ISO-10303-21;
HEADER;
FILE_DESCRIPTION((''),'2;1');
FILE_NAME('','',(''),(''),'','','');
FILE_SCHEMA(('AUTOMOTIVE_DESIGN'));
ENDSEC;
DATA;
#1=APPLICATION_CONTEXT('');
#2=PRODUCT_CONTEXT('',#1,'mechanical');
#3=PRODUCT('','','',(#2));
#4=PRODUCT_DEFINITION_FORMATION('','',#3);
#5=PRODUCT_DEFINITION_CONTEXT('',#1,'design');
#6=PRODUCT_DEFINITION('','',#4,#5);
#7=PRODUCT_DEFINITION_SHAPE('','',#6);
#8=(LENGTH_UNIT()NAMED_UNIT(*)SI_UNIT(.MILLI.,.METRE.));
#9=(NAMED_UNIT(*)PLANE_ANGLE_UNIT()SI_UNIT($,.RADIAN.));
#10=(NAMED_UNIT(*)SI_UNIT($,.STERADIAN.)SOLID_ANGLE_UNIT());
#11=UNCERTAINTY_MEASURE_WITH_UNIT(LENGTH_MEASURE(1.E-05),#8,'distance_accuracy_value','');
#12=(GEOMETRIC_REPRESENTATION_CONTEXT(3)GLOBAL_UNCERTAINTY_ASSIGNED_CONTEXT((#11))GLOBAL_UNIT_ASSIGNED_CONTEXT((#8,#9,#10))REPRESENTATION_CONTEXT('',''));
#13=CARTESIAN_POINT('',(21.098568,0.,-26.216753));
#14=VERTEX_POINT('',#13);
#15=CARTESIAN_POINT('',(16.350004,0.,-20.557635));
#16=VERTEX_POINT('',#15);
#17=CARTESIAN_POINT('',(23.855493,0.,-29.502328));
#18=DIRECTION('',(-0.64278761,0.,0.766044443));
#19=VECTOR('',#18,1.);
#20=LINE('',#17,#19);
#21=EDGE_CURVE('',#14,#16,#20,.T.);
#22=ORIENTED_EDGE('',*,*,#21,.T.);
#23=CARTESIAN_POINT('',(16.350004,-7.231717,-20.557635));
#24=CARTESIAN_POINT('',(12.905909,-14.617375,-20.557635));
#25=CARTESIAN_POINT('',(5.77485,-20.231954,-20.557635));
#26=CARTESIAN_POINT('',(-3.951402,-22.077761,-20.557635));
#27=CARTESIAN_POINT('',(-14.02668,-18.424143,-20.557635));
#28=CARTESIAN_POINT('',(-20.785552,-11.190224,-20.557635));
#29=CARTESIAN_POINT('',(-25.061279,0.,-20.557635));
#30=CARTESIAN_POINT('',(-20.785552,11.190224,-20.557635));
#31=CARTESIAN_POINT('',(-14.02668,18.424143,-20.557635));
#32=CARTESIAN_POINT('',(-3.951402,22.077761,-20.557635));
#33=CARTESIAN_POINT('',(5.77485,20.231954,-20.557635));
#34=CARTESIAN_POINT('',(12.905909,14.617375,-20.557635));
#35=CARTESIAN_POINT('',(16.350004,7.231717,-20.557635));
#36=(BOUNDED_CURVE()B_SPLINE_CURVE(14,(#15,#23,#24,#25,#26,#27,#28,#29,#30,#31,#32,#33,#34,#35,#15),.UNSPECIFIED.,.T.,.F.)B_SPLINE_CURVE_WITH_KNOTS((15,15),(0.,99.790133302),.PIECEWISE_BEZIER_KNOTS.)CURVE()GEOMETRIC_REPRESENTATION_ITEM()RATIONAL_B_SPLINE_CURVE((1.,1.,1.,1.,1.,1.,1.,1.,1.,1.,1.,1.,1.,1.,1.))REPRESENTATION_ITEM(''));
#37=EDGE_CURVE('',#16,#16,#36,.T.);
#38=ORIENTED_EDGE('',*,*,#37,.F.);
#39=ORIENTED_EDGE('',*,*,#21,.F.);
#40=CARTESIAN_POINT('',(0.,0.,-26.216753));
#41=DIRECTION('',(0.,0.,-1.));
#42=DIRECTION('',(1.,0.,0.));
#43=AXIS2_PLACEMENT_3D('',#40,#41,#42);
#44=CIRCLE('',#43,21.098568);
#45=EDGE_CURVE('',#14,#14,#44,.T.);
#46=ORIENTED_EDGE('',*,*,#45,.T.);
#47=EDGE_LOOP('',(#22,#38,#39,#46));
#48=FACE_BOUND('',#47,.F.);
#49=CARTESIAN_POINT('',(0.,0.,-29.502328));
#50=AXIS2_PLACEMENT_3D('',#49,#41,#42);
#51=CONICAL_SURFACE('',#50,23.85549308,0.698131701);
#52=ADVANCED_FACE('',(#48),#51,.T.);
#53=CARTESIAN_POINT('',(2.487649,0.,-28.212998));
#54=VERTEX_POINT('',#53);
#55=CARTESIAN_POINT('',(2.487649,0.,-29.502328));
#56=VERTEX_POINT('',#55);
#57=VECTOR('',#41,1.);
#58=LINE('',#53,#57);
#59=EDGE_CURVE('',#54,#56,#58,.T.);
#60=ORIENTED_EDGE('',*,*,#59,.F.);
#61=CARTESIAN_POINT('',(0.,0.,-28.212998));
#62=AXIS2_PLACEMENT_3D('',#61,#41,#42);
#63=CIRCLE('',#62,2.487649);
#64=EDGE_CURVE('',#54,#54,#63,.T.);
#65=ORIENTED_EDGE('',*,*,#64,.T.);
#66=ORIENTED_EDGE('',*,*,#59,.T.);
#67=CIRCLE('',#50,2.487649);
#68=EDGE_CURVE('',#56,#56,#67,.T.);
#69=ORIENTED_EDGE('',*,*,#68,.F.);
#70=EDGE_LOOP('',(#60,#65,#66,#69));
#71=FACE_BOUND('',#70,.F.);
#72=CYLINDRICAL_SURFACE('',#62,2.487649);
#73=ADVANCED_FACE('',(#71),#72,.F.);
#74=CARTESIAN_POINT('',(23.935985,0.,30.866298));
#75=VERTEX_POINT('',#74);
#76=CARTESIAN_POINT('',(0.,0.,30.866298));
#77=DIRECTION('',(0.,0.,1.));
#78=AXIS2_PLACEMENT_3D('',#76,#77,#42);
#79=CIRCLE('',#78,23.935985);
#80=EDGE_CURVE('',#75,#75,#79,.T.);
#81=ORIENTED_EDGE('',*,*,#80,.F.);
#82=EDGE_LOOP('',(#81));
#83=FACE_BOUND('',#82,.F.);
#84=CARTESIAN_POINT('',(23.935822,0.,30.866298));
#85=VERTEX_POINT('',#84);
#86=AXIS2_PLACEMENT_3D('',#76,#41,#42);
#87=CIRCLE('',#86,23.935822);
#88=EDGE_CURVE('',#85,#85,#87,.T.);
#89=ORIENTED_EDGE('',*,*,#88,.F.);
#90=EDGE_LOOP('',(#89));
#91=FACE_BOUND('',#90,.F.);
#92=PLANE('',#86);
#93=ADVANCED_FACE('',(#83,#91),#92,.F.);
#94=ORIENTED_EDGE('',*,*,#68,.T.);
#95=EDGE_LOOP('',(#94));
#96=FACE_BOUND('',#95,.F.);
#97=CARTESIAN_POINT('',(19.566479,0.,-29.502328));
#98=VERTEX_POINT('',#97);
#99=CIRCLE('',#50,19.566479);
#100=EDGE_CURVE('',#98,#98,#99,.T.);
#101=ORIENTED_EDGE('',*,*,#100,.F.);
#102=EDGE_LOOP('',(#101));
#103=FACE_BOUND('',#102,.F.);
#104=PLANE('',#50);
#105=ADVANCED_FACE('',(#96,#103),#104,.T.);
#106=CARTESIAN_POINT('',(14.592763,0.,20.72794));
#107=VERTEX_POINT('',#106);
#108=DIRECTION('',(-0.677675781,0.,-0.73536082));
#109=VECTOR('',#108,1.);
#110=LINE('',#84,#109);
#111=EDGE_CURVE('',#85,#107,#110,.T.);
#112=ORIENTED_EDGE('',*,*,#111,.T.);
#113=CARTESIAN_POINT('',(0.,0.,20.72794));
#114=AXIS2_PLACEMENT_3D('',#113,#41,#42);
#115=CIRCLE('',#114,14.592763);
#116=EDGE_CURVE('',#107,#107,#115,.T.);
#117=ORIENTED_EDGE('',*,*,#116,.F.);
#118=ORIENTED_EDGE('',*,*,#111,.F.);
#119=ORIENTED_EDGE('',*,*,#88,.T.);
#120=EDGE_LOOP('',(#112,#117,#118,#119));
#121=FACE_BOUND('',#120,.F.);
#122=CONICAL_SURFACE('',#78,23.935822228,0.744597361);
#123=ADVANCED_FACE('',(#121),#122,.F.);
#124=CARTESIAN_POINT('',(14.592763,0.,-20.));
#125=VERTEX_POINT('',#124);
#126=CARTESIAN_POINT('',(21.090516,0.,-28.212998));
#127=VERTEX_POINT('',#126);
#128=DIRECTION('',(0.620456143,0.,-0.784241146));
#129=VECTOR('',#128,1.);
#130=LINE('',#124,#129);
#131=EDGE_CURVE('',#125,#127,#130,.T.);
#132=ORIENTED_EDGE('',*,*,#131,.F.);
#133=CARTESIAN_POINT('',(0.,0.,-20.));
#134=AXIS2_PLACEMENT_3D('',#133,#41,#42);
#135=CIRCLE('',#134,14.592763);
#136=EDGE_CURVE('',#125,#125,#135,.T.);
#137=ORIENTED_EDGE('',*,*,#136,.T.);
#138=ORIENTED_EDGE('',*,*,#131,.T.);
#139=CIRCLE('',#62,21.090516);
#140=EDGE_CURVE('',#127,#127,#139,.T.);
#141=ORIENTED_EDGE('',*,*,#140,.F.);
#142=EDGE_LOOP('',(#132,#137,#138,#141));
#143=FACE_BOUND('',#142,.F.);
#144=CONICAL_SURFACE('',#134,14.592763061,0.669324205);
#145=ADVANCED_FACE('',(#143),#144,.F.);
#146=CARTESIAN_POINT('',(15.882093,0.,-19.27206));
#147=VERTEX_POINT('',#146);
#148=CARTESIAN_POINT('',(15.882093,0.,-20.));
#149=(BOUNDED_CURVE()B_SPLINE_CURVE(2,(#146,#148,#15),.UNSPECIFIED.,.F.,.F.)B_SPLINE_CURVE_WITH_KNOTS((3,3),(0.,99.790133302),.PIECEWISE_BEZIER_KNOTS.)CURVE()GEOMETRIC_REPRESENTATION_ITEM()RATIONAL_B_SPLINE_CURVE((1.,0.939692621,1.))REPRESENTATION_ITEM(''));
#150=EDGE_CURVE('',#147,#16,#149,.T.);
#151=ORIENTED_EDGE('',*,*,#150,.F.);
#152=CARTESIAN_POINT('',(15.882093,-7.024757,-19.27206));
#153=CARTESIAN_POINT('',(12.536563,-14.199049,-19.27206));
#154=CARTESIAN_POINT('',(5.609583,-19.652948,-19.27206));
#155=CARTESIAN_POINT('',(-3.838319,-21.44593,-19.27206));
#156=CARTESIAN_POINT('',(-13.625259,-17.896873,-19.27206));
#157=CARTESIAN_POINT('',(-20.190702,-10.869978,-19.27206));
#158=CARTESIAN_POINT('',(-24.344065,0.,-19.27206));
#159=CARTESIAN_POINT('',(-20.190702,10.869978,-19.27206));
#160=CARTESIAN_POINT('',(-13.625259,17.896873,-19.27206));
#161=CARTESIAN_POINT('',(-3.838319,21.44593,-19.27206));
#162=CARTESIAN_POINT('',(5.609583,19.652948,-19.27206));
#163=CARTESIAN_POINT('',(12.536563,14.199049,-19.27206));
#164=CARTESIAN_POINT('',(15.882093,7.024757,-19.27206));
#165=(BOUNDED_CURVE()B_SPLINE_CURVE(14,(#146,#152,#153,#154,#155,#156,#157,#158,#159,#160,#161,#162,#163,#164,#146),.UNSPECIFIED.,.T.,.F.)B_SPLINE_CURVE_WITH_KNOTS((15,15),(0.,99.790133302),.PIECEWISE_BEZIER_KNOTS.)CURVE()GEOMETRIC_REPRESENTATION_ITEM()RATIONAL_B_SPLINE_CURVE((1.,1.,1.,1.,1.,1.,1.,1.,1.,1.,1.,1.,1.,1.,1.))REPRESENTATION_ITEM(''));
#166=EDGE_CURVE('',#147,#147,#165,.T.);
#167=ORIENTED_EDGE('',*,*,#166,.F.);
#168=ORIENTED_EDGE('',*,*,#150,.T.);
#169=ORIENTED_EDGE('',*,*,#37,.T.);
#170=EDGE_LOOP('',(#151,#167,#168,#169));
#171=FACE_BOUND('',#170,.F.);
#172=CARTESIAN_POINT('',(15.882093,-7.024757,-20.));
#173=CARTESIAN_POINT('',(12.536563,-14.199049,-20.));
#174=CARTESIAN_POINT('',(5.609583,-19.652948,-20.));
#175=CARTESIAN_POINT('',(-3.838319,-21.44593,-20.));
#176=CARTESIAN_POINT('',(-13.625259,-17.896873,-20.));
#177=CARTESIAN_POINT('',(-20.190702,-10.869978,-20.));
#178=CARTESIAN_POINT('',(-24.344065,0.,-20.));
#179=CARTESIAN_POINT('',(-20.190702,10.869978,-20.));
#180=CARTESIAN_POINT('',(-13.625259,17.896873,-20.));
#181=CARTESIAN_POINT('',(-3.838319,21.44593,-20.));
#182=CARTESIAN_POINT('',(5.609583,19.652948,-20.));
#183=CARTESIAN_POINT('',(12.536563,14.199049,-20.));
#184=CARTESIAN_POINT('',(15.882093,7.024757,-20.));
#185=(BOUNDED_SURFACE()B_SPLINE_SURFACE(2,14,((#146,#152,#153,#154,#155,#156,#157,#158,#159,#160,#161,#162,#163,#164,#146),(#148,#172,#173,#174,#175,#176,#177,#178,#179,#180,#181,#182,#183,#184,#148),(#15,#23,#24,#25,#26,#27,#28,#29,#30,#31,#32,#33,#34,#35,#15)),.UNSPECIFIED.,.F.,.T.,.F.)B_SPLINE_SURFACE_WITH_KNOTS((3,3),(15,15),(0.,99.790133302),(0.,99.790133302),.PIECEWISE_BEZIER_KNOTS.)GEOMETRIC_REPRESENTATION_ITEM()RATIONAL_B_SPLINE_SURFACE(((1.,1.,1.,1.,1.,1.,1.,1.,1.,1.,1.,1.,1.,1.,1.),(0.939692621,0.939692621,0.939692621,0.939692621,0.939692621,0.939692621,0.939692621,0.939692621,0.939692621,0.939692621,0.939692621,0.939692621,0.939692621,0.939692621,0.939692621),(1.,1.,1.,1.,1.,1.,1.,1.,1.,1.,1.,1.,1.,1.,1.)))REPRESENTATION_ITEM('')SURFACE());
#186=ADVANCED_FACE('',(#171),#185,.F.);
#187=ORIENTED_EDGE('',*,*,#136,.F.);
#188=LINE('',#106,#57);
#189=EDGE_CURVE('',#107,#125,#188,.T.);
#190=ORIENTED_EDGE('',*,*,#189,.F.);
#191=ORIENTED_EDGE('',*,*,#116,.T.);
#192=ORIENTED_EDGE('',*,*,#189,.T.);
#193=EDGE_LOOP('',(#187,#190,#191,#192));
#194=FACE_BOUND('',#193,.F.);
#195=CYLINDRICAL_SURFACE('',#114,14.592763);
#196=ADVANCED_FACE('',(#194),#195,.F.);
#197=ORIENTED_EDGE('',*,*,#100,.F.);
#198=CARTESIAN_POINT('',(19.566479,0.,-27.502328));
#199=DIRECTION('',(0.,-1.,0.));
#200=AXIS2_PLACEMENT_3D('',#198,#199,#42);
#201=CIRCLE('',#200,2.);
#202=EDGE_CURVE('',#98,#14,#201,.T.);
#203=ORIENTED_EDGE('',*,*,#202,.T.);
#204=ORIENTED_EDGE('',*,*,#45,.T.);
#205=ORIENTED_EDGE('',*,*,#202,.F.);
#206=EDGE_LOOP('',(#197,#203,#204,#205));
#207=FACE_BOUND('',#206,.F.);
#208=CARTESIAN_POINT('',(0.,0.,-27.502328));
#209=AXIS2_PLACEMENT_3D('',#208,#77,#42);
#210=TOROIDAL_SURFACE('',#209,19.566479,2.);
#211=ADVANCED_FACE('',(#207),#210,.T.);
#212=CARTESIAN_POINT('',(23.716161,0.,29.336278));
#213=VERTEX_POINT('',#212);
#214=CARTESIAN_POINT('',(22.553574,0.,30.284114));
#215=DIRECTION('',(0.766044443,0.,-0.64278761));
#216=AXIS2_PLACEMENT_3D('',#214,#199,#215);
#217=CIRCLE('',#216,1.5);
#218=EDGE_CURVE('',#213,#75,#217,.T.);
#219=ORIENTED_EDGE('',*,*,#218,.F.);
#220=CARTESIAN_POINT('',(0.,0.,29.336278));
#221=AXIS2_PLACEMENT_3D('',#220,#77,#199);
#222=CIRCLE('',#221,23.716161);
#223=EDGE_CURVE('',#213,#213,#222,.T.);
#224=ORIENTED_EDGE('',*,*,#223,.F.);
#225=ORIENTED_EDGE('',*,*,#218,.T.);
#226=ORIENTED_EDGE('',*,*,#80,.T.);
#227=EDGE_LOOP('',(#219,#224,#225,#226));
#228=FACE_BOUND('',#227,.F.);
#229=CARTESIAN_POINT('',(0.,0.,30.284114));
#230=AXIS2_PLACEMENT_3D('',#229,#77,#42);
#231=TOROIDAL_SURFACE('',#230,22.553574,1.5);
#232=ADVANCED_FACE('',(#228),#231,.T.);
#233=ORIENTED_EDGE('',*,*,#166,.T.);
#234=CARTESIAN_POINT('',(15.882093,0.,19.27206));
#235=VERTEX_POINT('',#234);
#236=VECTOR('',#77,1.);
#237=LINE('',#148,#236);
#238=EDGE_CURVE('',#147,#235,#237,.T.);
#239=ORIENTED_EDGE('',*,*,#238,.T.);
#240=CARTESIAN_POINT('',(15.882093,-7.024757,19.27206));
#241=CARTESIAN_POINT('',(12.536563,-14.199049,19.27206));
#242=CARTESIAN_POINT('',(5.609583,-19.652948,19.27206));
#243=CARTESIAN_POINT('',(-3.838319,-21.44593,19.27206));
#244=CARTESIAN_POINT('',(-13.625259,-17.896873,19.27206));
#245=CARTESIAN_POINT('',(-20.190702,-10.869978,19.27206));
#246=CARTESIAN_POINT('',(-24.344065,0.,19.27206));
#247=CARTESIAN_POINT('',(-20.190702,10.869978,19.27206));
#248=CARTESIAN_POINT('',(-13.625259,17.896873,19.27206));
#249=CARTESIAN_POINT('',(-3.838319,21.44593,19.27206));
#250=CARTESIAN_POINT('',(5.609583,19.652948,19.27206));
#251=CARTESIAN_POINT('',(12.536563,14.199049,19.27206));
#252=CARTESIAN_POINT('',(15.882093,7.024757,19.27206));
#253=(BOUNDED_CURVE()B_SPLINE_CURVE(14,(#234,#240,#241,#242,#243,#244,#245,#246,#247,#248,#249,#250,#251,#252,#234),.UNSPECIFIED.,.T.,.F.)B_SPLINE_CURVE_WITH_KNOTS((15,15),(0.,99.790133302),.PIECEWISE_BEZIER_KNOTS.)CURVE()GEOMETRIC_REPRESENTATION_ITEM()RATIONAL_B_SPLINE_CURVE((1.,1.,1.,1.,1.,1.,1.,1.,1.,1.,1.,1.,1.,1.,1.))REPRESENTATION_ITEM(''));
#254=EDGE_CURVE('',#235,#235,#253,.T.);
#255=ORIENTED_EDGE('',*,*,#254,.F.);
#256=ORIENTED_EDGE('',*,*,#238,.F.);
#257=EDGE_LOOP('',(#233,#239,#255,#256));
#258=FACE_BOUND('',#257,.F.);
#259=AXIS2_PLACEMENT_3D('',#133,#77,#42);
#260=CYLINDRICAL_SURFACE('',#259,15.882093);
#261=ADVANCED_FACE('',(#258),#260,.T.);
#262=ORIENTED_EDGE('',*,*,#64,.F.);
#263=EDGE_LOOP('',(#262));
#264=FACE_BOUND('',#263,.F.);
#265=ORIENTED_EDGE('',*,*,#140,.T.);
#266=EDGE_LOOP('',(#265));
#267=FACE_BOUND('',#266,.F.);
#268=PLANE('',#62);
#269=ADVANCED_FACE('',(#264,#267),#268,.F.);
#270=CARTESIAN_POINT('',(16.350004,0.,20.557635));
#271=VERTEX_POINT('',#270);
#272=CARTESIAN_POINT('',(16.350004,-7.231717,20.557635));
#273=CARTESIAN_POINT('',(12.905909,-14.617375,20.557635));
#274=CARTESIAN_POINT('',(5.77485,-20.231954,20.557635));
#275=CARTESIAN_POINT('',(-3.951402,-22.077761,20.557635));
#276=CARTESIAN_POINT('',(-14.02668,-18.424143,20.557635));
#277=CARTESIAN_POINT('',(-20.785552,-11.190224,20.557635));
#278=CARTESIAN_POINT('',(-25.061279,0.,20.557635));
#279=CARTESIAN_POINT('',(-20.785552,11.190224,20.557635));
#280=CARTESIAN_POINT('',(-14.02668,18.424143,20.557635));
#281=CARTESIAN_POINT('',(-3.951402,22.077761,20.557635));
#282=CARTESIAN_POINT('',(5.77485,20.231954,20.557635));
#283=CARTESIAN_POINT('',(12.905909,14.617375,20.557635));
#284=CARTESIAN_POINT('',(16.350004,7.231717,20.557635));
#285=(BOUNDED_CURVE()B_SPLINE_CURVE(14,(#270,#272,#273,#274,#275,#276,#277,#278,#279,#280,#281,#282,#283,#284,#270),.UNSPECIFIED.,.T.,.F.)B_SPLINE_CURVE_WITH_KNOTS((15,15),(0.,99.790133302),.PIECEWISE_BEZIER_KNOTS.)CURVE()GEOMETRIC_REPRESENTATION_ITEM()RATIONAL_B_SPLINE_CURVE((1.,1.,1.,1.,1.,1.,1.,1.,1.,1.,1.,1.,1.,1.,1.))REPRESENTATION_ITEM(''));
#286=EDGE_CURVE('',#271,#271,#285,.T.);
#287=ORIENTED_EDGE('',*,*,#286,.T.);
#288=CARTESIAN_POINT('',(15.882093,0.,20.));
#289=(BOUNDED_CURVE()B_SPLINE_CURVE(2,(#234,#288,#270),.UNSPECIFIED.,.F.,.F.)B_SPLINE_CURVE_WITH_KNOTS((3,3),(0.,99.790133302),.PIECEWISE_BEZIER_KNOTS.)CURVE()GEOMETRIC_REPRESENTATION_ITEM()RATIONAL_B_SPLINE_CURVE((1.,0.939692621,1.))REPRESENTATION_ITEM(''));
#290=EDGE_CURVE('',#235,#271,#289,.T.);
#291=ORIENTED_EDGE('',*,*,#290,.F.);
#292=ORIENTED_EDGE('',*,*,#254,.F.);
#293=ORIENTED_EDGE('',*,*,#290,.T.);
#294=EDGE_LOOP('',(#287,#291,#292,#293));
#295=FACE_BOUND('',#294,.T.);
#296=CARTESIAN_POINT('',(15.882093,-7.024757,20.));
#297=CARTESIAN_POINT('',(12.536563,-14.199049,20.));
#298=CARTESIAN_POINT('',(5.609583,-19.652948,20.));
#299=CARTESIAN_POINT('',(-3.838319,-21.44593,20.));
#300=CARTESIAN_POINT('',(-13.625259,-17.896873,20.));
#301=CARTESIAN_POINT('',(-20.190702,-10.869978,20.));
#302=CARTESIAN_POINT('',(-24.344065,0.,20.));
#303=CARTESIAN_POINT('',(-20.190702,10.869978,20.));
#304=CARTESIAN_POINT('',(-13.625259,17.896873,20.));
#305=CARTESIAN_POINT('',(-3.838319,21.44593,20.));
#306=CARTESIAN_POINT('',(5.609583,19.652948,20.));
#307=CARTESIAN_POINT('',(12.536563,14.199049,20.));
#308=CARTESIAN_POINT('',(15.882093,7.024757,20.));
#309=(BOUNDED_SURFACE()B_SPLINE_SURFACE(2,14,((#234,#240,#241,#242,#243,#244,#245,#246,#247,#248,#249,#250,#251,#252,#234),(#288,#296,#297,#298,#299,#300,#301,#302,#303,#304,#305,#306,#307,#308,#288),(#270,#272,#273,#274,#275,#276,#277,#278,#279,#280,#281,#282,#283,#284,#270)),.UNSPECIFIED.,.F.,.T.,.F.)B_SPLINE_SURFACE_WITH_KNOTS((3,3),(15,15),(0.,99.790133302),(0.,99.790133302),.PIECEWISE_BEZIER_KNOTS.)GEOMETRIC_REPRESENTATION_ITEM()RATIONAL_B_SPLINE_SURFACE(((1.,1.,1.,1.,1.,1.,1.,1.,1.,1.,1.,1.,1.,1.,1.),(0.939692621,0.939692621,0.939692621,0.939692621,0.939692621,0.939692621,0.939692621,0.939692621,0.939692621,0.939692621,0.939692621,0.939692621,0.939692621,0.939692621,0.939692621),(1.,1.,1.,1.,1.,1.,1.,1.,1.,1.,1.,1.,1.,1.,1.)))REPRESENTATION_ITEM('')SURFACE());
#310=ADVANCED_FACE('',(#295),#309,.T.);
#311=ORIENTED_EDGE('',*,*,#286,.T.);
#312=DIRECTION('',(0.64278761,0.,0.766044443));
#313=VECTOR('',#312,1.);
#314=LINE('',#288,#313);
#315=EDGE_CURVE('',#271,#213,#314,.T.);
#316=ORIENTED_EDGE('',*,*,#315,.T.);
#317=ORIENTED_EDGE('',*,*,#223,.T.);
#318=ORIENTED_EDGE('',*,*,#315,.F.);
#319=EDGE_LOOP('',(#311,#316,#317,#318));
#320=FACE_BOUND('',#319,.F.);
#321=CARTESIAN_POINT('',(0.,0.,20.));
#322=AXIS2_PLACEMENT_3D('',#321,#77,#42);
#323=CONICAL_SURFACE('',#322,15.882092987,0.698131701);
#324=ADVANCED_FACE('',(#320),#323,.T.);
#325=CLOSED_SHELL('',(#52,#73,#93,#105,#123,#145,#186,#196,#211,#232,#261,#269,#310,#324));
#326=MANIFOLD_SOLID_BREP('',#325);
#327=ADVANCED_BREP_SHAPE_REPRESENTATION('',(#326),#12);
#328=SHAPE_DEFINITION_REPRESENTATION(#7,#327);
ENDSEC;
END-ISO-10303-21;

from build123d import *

# Parameters (mm, degrees)
F2_R = 2


# Not quite as in the source:
# - a fillet or chamfer that OpenCascade refuses, or shapes differently, is made with other operations: its cross-section is extruded or revolved along the edge and cut away or added


with BuildPart() as f1:
    # F0 (on Front) → F1 (revolve)
    with BuildSketch(Plane.XZ):
        Polygon((15.8820929868, -20), (15.8820929868, 0), (15.8820929868, 20), (25, 30.8662984399), (23.9358222275, 30.8662984399), (14.5927630612, 20.7279404685), (14.5927630612, 0.3639702343), (14.5927630612, -20), (21.0905159717, -28.2129982056), (2.4876487441, -28.2129982056), (2.4876487441, -29.5023282056), (22.5661631538, -29.5023282056), (23.8554930795, -29.5023282056), align=None)
    revolve(axis=Axis((0, 0, 0), (0, 0, -1)))

    # F2
    f2_edges = [f1.edges().sort_by_distance(p)[0] for p in [
        (-15.882093, 0, -20),
        (-15.882093, 0, 20),
        (-23.855493, 0, -29.502328),
    ]]
    fillet(f2_edges, radius=F2_R)

    # F3: fillet of radius 1.5 on 1 edges, made by hand

    # F3_s1 → F3_t2 (revolve, cut)
    with BuildSketch(Plane.XZ):
        with BuildLine():
            ThreePointArc((23.7026404335, 29.319932157), (24.0367869093, 30.060330686), (23.9359604662, 30.8663566642))
            Line((23.9359604662, 30.8663566642), (23.9636082001, 30.878001526))
            ThreePointArc((23.9636082001, 30.878001526), (24.4679802331, 30.8962984399), (25, 30.8962984399))
            Line((25, 30.8962984399), (25.0229813333, 30.8470148116))
            ThreePointArc((25.0229813333, 30.8470148116), (24.3742440967, 30.0738798792), (23.7256217668, 29.3006485287))
            Line((23.7256217668, 29.3006485287), (23.7026404335, 29.319932157))
        make_face()
    revolve(axis=Axis((0, 0, 30.8662984399), (0, 0, -1)), mode=Mode.SUBTRACT)


solid = f1.part
